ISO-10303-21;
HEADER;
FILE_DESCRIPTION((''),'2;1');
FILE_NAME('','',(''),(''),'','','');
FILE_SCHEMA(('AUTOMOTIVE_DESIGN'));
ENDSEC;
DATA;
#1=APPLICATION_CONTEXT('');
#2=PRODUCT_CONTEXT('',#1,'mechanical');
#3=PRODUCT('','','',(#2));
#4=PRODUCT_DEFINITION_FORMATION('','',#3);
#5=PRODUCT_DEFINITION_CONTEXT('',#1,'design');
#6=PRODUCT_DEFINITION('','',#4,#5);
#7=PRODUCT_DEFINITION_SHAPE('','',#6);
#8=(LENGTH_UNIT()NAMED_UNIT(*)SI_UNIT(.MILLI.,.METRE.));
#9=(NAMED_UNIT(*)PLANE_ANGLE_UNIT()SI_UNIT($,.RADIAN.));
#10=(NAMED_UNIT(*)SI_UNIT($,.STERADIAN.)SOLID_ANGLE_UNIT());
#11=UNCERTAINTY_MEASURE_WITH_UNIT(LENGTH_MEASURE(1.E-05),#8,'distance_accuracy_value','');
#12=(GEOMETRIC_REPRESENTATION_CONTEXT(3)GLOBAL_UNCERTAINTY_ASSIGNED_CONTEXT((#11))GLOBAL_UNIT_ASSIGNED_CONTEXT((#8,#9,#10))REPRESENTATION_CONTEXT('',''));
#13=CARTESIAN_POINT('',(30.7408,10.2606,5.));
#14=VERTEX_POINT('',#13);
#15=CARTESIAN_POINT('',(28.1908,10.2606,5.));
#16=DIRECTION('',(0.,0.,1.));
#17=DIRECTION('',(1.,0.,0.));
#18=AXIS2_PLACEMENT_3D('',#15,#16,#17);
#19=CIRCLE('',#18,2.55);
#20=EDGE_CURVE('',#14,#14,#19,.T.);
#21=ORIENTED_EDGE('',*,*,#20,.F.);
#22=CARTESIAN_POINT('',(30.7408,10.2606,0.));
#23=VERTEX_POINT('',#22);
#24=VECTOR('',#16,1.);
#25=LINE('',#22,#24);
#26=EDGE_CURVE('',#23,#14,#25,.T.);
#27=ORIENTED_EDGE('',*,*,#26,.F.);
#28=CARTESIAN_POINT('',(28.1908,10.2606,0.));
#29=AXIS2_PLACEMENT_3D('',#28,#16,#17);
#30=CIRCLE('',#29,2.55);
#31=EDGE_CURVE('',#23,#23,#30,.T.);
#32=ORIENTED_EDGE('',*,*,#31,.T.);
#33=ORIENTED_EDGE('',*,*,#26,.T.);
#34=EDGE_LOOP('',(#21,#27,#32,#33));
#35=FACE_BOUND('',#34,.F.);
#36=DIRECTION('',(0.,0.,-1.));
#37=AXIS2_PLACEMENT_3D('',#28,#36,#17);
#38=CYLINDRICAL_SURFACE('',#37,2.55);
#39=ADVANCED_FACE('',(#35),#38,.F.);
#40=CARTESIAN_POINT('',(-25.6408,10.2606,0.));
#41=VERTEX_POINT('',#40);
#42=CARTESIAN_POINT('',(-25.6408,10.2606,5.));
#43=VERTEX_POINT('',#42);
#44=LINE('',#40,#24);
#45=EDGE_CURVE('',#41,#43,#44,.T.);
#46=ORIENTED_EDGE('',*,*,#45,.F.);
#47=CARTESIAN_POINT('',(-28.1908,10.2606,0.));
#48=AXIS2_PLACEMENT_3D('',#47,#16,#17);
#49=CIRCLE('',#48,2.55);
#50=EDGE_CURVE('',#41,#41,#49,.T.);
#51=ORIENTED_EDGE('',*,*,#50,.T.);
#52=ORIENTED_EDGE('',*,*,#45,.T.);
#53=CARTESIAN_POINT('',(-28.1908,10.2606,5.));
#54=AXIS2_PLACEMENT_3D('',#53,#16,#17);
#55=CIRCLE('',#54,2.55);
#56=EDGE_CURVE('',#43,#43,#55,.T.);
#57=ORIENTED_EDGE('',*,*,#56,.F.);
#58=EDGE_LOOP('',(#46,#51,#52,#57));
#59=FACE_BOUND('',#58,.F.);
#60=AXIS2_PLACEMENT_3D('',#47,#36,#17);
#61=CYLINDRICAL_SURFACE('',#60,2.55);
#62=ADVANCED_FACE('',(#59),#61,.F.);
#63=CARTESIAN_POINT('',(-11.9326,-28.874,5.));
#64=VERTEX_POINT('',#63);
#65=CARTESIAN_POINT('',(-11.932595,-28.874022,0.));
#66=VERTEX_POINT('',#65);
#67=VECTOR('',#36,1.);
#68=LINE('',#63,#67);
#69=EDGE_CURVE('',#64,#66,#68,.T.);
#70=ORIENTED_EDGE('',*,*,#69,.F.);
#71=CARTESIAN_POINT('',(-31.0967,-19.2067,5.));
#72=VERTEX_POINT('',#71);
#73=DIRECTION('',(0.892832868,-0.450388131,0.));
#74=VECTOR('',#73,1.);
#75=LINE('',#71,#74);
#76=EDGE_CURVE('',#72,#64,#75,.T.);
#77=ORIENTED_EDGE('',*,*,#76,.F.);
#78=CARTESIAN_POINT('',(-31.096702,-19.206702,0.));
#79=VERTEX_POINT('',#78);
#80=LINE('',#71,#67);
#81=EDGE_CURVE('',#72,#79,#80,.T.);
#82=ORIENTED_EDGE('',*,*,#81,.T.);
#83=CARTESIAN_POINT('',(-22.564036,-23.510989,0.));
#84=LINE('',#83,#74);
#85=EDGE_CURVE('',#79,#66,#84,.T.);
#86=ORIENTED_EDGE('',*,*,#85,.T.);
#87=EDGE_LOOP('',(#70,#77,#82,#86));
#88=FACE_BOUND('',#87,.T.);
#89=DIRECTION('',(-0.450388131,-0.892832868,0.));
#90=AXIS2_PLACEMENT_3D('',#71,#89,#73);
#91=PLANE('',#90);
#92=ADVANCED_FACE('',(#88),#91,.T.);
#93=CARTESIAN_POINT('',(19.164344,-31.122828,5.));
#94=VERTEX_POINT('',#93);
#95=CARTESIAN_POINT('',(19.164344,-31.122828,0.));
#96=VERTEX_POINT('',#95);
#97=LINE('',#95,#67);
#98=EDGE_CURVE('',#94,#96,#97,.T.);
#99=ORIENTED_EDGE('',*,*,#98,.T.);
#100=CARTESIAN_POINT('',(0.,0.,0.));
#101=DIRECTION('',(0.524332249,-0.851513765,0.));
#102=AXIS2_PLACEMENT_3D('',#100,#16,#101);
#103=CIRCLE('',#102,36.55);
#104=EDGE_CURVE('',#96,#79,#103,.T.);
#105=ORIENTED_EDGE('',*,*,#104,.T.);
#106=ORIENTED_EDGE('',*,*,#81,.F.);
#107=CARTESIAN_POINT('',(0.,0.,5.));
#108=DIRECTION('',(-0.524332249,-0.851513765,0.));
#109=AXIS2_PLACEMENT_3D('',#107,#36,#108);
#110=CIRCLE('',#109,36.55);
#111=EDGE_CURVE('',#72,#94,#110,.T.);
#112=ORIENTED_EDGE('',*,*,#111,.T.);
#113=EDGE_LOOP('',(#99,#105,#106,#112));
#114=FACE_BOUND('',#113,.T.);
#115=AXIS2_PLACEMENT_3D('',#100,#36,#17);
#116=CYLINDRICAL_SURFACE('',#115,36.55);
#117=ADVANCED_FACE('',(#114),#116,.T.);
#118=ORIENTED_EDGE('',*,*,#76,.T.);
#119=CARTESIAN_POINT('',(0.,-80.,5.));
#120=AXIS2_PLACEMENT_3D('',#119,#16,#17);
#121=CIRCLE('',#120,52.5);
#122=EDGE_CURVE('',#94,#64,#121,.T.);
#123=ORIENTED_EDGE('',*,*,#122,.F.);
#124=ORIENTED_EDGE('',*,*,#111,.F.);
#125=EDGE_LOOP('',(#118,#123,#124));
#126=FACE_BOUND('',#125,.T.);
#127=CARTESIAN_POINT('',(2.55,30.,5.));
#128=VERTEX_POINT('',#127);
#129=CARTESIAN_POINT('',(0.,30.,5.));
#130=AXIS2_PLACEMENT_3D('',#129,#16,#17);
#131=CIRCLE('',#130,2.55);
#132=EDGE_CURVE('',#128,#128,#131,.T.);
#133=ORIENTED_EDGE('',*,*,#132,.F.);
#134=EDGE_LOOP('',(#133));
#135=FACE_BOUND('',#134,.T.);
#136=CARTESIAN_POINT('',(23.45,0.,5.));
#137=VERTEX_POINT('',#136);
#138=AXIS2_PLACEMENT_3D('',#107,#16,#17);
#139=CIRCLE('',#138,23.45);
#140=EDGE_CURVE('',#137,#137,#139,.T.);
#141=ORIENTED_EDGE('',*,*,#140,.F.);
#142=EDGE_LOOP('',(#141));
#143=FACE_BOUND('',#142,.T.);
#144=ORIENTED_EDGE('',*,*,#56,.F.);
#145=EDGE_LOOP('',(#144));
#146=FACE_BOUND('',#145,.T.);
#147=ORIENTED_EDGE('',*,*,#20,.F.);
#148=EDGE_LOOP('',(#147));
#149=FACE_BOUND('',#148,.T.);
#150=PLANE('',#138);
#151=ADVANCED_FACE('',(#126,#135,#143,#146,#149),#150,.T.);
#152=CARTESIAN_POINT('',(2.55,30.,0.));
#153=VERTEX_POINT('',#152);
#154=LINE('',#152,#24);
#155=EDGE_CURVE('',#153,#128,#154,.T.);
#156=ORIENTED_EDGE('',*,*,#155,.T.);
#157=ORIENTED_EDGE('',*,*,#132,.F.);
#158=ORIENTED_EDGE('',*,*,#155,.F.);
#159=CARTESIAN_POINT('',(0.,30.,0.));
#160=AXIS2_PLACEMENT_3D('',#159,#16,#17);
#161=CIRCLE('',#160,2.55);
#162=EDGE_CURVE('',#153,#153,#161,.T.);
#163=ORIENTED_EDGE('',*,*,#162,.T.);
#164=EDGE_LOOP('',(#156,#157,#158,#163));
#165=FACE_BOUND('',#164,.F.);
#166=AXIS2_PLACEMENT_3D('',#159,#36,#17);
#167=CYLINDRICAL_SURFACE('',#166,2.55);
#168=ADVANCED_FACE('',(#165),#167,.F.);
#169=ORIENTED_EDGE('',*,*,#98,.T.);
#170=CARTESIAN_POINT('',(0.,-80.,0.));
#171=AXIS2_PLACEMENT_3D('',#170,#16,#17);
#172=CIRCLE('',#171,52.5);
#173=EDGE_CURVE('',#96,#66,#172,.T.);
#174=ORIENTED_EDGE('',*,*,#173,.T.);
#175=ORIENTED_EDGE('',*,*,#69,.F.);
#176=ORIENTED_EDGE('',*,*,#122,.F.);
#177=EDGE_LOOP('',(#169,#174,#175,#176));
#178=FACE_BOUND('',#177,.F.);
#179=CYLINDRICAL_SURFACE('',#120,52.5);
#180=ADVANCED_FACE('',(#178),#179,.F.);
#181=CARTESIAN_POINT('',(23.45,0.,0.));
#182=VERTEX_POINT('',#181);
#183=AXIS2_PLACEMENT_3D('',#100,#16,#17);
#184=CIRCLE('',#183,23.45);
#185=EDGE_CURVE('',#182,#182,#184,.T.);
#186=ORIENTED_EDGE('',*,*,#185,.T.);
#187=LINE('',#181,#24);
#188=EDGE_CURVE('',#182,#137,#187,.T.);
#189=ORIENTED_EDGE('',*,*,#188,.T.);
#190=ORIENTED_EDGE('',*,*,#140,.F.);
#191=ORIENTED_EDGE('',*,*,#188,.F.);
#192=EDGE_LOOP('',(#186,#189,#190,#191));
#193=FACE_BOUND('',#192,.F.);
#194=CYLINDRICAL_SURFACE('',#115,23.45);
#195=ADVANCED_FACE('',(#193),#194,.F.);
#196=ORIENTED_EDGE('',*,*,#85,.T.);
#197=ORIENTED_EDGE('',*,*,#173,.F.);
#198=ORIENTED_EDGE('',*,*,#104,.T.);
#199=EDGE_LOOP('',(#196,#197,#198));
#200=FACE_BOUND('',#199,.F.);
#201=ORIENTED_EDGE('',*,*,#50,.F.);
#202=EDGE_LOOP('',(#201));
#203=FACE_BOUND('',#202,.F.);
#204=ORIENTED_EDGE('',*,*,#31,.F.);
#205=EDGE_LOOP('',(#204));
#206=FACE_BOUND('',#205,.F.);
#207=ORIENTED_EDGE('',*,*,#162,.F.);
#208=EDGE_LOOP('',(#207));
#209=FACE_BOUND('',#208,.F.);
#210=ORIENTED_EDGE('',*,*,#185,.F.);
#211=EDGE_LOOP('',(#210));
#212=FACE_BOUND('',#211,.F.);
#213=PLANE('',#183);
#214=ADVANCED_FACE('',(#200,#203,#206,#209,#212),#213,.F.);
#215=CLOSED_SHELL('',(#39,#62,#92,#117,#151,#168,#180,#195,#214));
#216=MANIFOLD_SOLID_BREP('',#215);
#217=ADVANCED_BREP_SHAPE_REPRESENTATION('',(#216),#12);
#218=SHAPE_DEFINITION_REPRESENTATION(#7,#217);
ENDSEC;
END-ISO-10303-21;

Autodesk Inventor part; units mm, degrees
ref_plane "YZ Plane" through (0, 0, 0) normal (1, 0, 0) x (0, 1, 0)
ref_plane "XZ Plane" through (0, 0, 0) normal (0, 1, 0) x (-1, 0, 0)
ref_plane "XY Plane" through (0, 0, 0) normal (0, 0, 1) x (1, 0, 0)
sketch "スケッチ1" plane through (0, 0, 0) normal (0, 0, 1) x (1, 0, 0)
  circle A0 centre (0, 0) radius 23.45
  circle A1 centre (0, 0) radius 36.55
  line L0 (0, 0) -> (-28.1908, 10.2606) construction
  line L1 (0, 0) -> (28.1908, 10.2606) construction
  line L2 (-39.5959, 0) -> (43.1917, 0) construction
  line L3 (0, 0) -> (0, 30) construction
  circle A2 centre (-28.1908, 10.2606) radius 2.55
  circle A3 centre (0, 30) radius 2.55
  circle A4 centre (28.1908, 10.2606) radius 2.55
  dimension "d0" = 73.1
  dimension "d1" = 46.9
  dimension "d2" = 30
  dimension "d3" = 30
  dimension "d6" = 20
  dimension "d7" = 20
  dimension "d8" = 30
  dimension "d9" = 5.1
  dimension "d10" = 5.1
  dimension "d11" = 5.1
extrude "押し出し1" add sketch "スケッチ1" along normal blind 5
sketch "スケッチ2" plane through (0, 0, 5) normal (0, 0, 1) x (1, 0, 0)
  line L0 (0, 0) -> (0, -80) construction
  circle A0 centre (0, -80) radius 52.5
  dimension "d14" = 80
  dimension "d18" = 105
extrude "押し出し2" cut sketch "スケッチ2" against normal blind 10
sketch "スケッチ3" plane through (0, 0, 5) normal (0, 0, 1) x (1, 0, 0)
  circle A0 centre (28.1908, 10.2606) radius 2.55 projected
  line L0 (0, 0) -> (28.1908, 10.2606)
  circle A1 centre (-28.1908, 10.2606) radius 2.55 projected
  line L1 (-28.1908, 10.2606) -> (0, 0)
  circle A2 centre (0, 30) radius 2.55 projected
  line L2 (0, 0) -> (0, 30)
sketch "スケッチ4" plane through (0, 0, 5) normal (0, 0, 1) x (1, 0, 0)
  arc A0 (19.1643, -31.1228) -> (-19.1643, -31.1228) centre (0, 0) ccw projected
  line L0 (-31.0967, -19.2067) -> (-11.9326, -28.874)
  arc A1 (19.1643, -31.1228) -> (-19.1643, -31.1228) centre (0, -80) ccw projected
  line L1 (-31.0967, -19.2067) -> (-38.9528, -25.1507)
  line L2 (-38.9528, -25.1507) -> (-33.0141, -34.3769)
  line L3 (-33.0141, -34.3769) -> (-12.5468, -31.9378)
  line L4 (-12.5468, -31.9378) -> (-11.9326, -28.874)
  line L5 (-31.0967, -19.2067) -> (-11.9326, -28.874)
  line L6 (-29.2537, -31.1228) -> (-31.0967, -19.2067)
extrude "押し出し3" cut sketch "スケッチ4" against normal blind 10 contours L0 A1 A0 picked at (-23.5945, -23.9544)
properties part number "円 46.9mm" material "アルミニウム 6061"
